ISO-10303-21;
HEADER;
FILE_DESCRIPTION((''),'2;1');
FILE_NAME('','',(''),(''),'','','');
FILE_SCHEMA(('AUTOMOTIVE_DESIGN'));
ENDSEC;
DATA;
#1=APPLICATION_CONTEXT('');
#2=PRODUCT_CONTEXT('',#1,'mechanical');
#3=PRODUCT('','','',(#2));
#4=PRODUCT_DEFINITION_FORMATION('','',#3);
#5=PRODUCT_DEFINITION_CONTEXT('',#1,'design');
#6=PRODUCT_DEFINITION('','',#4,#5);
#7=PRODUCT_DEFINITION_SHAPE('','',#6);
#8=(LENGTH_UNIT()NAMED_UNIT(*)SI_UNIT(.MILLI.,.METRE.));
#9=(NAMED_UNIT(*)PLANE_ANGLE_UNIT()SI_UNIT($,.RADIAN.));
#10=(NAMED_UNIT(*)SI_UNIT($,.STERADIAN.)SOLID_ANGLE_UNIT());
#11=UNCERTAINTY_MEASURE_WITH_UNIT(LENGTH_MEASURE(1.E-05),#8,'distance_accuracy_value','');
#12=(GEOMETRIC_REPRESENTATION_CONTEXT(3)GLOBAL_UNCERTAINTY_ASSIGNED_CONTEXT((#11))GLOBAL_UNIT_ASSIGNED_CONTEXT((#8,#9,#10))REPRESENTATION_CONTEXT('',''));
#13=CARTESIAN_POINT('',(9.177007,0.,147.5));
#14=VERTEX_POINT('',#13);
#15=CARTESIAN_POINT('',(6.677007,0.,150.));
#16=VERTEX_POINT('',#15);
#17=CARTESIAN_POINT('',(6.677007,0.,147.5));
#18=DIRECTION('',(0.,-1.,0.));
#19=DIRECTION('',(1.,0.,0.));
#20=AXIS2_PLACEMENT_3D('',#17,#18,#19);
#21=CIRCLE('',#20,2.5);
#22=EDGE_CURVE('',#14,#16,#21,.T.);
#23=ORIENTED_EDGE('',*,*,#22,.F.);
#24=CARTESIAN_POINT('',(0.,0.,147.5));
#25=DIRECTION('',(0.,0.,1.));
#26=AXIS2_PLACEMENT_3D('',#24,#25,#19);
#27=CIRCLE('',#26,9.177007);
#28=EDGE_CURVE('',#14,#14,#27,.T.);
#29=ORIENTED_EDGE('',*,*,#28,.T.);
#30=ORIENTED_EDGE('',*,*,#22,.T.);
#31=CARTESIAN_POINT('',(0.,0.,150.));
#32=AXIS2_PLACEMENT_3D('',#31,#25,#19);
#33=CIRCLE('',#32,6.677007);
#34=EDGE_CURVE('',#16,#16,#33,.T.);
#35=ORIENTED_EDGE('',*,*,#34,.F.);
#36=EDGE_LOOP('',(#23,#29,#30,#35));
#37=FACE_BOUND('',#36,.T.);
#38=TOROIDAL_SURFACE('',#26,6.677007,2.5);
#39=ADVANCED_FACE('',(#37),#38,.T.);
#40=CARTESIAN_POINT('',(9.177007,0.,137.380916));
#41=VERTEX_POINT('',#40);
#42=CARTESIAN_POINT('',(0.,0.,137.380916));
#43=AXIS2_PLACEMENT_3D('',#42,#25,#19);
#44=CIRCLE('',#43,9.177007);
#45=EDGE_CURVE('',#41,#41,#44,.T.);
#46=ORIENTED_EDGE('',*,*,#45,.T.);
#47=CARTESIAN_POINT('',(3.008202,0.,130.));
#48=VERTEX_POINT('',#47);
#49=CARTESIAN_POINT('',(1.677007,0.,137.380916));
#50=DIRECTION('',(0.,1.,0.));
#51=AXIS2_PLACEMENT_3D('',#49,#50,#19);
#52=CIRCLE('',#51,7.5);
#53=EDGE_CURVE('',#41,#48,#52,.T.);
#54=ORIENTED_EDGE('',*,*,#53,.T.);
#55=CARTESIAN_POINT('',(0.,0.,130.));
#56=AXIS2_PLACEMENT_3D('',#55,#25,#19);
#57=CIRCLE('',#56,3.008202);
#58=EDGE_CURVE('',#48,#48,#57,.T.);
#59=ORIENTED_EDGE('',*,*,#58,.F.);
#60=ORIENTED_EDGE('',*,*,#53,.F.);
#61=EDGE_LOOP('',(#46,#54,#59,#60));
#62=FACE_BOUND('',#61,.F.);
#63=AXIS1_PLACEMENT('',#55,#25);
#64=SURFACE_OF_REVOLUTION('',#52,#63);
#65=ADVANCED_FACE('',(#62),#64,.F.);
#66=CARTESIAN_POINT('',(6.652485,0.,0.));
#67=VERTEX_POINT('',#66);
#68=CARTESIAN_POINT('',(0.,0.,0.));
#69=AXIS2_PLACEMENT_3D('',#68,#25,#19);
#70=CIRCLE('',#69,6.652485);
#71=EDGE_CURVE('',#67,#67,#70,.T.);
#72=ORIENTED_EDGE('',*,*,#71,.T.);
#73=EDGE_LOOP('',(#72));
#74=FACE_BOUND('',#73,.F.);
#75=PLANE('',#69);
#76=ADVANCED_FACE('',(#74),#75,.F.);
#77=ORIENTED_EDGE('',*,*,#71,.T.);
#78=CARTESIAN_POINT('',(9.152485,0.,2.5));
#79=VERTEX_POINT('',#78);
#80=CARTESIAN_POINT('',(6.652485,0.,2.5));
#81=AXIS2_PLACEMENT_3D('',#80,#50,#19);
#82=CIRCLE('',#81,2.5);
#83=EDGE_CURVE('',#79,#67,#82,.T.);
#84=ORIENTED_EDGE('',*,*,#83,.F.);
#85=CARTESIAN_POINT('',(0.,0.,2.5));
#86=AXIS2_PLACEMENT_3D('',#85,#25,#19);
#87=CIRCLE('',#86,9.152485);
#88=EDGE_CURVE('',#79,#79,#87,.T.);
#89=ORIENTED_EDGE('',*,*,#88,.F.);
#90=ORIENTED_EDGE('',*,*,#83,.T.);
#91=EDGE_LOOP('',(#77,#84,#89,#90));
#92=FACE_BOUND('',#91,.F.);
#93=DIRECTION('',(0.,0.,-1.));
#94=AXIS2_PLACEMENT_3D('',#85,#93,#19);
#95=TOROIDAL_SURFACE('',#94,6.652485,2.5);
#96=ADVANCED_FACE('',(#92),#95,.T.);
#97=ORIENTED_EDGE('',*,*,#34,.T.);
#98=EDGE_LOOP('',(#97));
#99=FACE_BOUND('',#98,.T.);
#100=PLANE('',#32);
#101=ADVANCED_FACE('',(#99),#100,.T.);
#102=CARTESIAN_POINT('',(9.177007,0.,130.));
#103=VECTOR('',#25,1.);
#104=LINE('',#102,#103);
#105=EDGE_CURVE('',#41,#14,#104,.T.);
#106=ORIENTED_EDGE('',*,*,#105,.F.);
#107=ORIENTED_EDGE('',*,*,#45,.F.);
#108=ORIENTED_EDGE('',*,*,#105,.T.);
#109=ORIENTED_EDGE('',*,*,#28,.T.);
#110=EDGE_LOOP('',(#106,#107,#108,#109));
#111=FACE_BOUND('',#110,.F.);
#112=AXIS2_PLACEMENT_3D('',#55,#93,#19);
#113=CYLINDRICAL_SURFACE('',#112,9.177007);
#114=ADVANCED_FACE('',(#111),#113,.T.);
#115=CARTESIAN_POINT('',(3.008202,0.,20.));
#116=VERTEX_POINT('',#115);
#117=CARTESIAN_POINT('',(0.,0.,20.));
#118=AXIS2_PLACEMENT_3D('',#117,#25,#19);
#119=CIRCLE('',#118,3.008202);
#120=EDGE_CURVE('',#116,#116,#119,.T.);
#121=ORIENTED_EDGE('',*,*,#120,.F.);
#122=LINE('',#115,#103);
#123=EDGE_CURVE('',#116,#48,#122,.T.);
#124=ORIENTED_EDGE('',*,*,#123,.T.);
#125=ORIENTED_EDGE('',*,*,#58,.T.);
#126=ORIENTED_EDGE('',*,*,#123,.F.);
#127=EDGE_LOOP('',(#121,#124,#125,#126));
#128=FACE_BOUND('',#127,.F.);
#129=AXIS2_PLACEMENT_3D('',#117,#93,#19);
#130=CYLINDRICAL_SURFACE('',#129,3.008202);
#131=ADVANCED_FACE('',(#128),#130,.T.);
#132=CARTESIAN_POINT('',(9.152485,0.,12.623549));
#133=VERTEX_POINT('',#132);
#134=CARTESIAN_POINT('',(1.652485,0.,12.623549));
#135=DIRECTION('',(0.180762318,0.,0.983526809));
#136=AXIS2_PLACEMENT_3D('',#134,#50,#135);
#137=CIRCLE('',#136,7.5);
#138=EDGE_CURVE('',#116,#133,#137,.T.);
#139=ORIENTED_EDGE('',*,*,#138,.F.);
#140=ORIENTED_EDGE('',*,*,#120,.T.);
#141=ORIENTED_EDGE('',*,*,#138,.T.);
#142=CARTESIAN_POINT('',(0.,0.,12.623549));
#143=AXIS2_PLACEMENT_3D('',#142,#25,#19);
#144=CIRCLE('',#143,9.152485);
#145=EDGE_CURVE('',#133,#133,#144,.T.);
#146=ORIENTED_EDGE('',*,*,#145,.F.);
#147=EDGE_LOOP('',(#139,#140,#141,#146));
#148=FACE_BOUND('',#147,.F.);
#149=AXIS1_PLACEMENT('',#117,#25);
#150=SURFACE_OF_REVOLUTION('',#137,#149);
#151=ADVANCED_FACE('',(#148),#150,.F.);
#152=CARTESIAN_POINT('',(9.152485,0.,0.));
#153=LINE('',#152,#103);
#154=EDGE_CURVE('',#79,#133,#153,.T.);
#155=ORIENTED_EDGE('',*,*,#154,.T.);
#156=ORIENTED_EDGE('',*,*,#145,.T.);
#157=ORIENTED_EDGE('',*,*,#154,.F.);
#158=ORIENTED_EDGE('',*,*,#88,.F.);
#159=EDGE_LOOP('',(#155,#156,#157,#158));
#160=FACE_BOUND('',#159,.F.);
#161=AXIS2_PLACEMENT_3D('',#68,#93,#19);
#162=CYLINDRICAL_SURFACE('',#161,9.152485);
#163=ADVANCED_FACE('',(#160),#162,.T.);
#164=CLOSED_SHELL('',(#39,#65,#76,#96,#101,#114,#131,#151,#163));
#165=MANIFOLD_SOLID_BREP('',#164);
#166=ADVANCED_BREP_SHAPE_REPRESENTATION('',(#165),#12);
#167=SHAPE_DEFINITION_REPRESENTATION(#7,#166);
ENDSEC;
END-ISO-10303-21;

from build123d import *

# Parameters (mm, degrees)
F0_R     = 9.1524845949
F1_DEPTH = 20
F2_R     = 3.008201979
F3_DEPTH = 110
F4_R     = 9.1770067028
F5_DEPTH = 20
F7_R     = 2.5


# Not quite as in the source:
# - a fillet or chamfer that OpenCascade refuses, or shapes differently, is made with other operations: its cross-section is extruded or revolved along the edge and cut away or added


with BuildPart() as f1:
    # F0 (on Top) → F1 (new body)
    with BuildSketch(Plane.XY):
        Circle(F0_R)
    extrude(amount=F1_DEPTH)

    # F2 (on face) → F3 (join)
    with BuildSketch(Plane.XY.offset(20)):
        Circle(F2_R)
    extrude(amount=F3_DEPTH)

    # F4 (on face) → F5 (join)
    with BuildSketch(Plane.XY.offset(130)):
        Circle(F4_R)
    extrude(amount=F5_DEPTH)

    # F6: fillet of radius 7.5 on 2 edges, made by hand

    # F6_s1 → F6_t2 (revolve, cut)
    with BuildSketch(Plane.XZ):
        with BuildLine():
            ThreePointArc((3.008201979, 20), (7.4152044554, 17.4236593265), (9.1524845949, 12.6235489309))
            Line((9.1524845949, 12.6235489309), (9.1524845949, 20))
            Line((9.1524845949, 20), (3.008201979, 20))
        make_face()
    revolve(axis=Axis((0, 0, 20), (0, 0, 1)), mode=Mode.SUBTRACT)

    # F6_s3 → F6_t4 (revolve, cut)
    with BuildSketch(Plane.XZ):
        with BuildLine():
            ThreePointArc((9.1770067028, 137.3809158738), (7.4317423427, 132.5712362884), (3.008201979, 130))
            Line((3.008201979, 130), (9.1770067028, 130))
            Line((9.1770067028, 130), (9.1770067028, 137.3809158738))
        make_face()
    revolve(axis=Axis((0, 0, 130), (0, 0, 1)), mode=Mode.SUBTRACT)

    # F7
    f7_edges = [f1.edges().sort_by_distance(p)[0] for p in [
        (-9.177007, 0, 150),
        (-9.152485, 0, 0),
    ]]
    fillet(f7_edges, radius=F7_R)


solid = f1.part
